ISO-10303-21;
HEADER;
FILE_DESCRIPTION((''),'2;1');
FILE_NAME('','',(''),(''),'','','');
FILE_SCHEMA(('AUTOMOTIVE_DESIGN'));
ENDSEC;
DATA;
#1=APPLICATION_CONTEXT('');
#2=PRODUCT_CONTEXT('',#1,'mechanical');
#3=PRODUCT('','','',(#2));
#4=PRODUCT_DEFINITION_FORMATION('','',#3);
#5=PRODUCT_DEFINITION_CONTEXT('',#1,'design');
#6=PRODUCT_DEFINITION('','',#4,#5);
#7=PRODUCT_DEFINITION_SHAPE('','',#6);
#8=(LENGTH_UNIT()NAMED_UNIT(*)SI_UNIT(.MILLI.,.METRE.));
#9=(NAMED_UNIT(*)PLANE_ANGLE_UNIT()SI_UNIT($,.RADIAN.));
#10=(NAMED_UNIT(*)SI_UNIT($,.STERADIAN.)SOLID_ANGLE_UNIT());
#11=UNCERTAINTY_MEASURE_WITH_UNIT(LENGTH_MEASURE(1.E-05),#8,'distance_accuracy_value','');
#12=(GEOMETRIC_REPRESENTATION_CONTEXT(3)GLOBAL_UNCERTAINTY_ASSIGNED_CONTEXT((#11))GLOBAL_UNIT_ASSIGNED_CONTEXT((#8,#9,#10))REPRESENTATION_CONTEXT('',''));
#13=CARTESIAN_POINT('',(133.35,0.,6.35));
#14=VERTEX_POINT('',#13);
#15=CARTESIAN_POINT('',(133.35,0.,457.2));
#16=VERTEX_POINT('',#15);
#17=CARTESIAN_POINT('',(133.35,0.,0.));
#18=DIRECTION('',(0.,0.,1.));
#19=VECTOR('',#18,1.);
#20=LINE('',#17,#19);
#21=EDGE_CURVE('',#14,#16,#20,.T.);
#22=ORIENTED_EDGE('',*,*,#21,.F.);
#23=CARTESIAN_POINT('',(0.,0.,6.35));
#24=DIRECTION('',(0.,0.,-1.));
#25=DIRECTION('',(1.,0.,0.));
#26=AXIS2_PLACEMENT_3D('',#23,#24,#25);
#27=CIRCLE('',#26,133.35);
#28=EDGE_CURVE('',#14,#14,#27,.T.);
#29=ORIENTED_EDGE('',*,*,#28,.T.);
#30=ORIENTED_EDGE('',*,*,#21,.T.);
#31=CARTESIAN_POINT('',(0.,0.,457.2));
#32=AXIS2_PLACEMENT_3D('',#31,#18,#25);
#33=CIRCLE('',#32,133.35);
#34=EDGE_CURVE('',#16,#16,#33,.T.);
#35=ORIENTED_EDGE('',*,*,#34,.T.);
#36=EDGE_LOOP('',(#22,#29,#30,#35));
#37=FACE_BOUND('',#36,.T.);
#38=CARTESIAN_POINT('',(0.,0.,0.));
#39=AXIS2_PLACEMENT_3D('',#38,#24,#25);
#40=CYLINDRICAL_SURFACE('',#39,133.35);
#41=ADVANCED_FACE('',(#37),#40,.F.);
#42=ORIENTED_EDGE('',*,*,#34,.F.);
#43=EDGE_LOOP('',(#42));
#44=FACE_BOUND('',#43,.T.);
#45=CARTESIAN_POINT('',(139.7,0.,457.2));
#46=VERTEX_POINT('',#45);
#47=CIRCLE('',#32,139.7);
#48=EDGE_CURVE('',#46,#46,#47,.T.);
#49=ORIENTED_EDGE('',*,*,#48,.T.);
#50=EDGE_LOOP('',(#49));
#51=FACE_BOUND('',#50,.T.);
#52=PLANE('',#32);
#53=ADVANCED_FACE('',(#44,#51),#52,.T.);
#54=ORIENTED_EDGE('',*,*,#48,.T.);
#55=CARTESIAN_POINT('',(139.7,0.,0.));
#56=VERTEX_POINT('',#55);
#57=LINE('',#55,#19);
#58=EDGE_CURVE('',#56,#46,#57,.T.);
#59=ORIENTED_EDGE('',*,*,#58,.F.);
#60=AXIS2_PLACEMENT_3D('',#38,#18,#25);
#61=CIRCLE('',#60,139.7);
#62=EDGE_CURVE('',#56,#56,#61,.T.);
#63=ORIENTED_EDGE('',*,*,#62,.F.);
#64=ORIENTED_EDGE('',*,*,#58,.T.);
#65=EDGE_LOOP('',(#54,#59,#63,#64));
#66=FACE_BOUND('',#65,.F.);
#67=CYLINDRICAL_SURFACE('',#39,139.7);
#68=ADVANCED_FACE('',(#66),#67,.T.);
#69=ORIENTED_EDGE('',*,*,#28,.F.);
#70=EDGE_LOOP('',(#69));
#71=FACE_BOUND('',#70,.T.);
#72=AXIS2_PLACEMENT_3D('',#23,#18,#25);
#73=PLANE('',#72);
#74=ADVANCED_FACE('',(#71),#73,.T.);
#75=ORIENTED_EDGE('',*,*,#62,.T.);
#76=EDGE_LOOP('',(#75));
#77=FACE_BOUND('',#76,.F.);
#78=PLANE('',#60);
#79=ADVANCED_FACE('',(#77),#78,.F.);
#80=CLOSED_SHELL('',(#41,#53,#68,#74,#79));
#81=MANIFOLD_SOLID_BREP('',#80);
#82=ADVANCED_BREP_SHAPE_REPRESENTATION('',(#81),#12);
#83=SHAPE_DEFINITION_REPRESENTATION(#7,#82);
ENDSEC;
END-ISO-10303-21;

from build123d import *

# Parameters (mm, degrees)
F2_R     = 139.7
F3_DEPTH = 457.2
F4_T     = -6.35


# Not quite as in the source:
# - a variable given as a bare number and used for a length is read in inches; the dataset says mm whatever the document's units were


with BuildPart() as f3:
    # F2 (on Top) → F3 (new body)
    with BuildSketch(Plane.XY):
        Circle(F2_R)
    extrude(amount=F3_DEPTH)

    # F4
    f4_openings = [f3.faces().sort_by_distance(p)[0] for p in [
        (0, 0, 457.2),
    ]]
    offset(amount=F4_T, openings=f4_openings)


solid = f3.part
